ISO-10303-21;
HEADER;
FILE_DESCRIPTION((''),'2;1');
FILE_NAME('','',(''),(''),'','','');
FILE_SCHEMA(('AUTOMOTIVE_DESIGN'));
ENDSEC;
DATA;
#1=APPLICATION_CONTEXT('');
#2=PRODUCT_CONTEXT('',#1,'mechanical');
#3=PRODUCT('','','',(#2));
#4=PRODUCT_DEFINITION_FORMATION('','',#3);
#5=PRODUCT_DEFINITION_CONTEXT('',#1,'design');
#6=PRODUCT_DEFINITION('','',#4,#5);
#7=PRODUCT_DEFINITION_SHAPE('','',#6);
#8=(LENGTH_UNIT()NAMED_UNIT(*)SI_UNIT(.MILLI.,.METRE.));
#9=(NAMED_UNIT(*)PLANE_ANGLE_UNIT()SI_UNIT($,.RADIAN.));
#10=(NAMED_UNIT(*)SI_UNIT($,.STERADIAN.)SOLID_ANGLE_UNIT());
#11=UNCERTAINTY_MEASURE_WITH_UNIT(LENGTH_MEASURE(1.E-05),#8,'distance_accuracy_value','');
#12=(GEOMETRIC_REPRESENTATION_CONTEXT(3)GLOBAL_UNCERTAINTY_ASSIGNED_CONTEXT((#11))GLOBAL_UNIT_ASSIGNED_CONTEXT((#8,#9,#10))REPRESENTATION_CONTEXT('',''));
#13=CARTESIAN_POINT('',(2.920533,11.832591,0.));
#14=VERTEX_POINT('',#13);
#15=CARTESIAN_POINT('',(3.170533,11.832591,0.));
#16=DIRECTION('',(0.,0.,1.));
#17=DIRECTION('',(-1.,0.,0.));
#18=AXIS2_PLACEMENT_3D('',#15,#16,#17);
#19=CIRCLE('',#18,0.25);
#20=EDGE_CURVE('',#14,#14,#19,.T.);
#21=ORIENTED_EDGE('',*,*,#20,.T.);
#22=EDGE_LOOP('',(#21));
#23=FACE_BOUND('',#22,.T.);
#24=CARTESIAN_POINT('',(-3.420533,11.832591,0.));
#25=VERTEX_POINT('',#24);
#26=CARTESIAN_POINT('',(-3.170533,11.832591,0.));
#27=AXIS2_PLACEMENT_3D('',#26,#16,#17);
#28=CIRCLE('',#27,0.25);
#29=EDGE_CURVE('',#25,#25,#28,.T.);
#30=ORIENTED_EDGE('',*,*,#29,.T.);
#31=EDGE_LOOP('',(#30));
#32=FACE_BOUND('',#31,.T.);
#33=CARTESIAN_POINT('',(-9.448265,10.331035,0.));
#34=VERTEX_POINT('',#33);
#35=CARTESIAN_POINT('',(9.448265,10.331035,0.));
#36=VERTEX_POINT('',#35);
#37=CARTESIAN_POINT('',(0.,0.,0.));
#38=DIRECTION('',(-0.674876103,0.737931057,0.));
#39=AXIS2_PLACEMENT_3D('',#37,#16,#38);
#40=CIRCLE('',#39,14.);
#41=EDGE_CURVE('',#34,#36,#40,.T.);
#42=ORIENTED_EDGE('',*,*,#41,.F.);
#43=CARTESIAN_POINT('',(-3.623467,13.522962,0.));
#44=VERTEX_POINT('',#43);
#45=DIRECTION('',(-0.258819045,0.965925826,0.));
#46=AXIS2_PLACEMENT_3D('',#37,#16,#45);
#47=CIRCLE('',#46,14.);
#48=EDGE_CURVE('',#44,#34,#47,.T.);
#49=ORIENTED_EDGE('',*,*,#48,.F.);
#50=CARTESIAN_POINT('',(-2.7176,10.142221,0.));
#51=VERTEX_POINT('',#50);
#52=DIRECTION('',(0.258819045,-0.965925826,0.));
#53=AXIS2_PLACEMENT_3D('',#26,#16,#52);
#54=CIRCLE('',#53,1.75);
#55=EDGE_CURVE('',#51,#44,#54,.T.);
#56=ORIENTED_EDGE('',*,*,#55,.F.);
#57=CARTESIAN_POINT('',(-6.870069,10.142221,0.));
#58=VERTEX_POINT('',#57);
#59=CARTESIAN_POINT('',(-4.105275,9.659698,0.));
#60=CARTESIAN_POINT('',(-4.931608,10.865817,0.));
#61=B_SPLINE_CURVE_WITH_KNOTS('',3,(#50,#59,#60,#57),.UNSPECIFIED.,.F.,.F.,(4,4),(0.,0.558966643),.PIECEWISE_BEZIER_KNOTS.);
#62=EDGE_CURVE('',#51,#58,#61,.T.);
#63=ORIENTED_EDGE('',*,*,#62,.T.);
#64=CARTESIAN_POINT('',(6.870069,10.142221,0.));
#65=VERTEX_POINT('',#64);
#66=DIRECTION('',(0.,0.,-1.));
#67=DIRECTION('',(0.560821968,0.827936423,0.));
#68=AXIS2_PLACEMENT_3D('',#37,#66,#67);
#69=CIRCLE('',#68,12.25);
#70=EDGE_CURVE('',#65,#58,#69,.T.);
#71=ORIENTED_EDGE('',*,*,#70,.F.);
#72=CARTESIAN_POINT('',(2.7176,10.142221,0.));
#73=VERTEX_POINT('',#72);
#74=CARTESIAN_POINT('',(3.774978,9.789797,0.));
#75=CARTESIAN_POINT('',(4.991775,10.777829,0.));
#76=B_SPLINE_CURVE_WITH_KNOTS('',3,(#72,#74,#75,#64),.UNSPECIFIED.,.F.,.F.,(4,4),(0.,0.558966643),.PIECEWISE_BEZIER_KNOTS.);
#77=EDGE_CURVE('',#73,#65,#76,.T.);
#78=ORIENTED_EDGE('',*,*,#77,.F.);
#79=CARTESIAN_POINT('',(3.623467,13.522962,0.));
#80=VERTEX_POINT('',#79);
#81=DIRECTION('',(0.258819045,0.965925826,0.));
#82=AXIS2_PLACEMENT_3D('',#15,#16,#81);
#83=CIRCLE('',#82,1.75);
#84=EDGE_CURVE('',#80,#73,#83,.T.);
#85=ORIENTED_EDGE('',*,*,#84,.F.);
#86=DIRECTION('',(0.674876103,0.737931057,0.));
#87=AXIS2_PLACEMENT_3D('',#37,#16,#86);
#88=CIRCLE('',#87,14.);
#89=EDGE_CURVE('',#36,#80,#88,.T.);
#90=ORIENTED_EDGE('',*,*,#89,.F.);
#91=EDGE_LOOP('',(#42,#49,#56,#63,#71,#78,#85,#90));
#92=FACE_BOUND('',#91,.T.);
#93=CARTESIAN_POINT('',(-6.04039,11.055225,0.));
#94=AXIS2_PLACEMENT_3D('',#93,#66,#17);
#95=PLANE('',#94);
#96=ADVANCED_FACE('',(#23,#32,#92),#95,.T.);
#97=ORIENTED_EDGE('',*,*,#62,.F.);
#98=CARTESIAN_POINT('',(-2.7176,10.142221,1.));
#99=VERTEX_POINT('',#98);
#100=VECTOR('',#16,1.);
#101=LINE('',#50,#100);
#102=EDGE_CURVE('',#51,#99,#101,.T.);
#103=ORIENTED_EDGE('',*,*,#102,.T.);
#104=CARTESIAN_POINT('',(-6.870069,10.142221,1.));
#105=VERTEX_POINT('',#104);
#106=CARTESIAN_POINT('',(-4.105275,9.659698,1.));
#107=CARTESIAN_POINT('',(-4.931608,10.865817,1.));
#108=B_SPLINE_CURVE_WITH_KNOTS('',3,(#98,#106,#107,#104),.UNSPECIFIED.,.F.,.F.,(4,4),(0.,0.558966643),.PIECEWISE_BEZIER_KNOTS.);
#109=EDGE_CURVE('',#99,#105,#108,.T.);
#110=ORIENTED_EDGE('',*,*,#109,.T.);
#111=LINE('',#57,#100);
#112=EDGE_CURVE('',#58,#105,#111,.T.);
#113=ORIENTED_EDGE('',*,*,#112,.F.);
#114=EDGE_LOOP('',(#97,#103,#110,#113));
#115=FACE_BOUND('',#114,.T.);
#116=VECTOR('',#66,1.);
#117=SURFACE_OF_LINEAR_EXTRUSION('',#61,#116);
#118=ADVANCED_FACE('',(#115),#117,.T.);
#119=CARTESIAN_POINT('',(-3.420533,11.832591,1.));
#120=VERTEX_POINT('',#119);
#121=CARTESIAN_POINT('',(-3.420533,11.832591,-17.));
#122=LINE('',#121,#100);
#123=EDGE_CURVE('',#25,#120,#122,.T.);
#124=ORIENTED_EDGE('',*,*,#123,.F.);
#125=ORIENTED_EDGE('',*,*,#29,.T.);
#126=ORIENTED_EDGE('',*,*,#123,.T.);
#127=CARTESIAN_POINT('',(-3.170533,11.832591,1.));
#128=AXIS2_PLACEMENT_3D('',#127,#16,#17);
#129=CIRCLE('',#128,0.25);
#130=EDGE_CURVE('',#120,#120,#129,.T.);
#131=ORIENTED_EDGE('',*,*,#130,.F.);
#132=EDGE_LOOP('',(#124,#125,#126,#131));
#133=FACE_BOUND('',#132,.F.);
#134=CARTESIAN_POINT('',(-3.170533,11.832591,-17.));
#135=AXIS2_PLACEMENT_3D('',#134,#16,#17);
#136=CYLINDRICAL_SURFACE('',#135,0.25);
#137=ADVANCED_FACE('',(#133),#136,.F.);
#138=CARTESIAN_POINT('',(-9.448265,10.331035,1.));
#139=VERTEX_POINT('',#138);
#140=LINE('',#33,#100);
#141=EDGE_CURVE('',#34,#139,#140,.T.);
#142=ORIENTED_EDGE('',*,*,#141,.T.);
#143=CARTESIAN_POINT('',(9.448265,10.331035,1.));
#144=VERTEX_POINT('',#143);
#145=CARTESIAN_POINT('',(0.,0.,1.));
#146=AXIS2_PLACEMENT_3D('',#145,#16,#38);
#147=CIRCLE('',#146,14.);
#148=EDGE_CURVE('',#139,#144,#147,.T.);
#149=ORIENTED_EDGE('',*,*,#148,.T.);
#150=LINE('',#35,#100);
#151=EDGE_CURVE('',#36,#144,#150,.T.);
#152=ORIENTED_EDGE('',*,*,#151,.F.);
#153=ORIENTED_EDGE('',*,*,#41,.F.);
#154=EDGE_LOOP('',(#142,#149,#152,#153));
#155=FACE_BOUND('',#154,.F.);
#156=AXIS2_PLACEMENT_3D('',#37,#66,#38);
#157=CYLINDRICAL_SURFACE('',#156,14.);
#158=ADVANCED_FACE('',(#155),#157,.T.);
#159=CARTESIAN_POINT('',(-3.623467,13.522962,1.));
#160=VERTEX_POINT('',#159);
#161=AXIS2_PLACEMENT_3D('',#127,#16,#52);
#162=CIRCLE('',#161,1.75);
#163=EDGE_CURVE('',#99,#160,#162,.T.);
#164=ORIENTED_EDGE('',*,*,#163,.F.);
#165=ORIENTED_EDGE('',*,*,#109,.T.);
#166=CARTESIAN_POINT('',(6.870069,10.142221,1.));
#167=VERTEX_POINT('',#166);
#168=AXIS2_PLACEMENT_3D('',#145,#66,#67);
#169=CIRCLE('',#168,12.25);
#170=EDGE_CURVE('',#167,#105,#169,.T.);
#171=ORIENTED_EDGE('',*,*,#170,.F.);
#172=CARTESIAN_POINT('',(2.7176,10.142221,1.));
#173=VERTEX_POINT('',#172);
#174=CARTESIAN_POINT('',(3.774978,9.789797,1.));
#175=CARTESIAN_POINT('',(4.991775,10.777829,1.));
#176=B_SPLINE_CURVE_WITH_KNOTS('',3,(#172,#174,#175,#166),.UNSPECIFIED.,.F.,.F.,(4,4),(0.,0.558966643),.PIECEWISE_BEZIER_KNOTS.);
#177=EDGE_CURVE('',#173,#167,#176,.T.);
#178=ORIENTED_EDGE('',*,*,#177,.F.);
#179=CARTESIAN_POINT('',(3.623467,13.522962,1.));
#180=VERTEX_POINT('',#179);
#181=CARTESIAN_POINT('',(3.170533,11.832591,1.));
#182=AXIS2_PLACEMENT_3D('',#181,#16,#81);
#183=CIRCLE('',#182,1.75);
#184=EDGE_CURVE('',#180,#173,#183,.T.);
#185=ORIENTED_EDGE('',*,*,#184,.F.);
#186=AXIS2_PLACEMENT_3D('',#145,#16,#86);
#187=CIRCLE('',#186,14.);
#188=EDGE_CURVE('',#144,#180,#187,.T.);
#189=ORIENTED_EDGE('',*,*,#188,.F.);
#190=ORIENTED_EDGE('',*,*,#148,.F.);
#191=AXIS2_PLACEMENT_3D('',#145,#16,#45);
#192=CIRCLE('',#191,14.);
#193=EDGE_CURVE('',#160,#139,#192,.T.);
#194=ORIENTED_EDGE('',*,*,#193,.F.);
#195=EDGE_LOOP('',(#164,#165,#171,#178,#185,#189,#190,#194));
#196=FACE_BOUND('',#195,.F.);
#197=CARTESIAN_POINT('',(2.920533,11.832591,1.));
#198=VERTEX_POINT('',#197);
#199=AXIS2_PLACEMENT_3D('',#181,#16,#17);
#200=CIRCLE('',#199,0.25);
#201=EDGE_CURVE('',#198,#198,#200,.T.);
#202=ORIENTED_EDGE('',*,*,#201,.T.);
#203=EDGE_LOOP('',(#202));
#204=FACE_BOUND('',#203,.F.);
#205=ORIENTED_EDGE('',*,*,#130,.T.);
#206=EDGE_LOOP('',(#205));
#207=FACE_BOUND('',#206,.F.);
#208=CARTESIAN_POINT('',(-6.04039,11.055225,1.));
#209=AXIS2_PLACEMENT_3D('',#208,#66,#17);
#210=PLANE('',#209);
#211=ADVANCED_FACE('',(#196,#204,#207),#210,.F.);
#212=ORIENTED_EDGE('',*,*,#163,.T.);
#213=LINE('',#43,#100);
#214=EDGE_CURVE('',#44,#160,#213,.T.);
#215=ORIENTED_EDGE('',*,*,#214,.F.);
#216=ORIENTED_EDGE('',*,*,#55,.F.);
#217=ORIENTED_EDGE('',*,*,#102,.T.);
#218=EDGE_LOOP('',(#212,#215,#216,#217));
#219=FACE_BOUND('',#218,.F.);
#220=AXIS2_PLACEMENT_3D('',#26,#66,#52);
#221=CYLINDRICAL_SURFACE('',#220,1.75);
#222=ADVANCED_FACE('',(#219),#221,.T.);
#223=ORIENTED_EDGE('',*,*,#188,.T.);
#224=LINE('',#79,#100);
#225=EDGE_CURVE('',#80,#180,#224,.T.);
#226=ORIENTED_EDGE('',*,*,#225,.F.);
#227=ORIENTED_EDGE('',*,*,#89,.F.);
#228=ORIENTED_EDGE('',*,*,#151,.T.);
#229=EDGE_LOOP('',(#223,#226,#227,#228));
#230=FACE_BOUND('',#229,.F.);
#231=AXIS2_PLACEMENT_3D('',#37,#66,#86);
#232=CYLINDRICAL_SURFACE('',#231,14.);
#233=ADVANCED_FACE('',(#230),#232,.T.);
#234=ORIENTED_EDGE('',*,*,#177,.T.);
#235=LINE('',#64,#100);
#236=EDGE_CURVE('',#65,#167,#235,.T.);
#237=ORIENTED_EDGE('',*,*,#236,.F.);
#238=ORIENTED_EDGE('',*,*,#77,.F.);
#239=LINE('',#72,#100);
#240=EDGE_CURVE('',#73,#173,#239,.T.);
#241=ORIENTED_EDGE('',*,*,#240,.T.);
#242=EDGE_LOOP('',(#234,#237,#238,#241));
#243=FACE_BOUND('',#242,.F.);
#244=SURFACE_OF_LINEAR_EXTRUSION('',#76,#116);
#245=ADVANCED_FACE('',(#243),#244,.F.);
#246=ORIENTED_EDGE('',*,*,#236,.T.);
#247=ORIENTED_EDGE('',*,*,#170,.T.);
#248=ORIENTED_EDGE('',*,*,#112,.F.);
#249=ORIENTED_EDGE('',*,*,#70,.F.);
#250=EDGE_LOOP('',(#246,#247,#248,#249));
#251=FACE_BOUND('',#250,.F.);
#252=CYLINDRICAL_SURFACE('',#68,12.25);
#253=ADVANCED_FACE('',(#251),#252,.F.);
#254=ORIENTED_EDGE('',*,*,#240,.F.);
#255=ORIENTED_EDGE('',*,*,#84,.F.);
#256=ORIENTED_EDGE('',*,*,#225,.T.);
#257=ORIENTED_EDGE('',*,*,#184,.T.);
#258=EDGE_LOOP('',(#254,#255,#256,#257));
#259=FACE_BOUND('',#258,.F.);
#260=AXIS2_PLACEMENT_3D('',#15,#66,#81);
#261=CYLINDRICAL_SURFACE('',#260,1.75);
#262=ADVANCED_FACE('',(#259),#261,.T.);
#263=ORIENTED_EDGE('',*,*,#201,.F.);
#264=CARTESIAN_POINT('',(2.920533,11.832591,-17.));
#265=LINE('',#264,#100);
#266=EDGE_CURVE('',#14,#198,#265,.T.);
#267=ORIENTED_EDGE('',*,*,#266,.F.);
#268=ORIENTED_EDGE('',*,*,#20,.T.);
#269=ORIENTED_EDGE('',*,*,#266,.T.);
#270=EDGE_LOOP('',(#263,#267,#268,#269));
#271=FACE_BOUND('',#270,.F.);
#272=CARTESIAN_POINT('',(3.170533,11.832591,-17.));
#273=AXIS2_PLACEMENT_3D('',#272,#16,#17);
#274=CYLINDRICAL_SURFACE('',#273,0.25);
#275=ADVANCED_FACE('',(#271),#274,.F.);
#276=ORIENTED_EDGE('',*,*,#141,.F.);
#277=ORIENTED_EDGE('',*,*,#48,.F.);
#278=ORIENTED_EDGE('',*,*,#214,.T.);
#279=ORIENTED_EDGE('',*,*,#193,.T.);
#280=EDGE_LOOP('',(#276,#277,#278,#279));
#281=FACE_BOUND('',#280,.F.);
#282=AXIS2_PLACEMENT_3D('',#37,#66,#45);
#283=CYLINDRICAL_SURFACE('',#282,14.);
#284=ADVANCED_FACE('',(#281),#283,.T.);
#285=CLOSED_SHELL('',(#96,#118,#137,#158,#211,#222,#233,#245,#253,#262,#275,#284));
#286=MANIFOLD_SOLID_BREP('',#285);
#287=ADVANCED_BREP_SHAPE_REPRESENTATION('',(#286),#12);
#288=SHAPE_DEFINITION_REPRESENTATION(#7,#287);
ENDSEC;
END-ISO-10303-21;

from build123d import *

# Parameters (mm, degrees)
F1_DEPTH = 1
F2_D     = 0.5
F2_DEPTH = 17
F2_TIP   = 0.1502151548


with BuildPart() as f1:
    # F0 (on Top) → F1 (new body)
    with BuildSketch(Plane.XY):
        with BuildLine():
            add(Edge.make_bspline(
                [(-6.8700691129, 10.142221176), (-8.399545307, 9.5712927005), (-10.6213726103, 7.7990288846), (-9.4482654422, 10.3310348046)],
                knots=[0.5589666429, 0.5589666429, 0.5589666429, 0.5589666429, 1, 1, 1, 1], degree=3))
            add(Edge.make_bspline(
                [(-2.7175999736, 10.142221176), (-4.1052754968, 9.659698233), (-4.9316076337, 10.8658171767), (-6.8700691129, 10.142221176)],
                knots=[0, 0, 0, 0, 0.5589666429, 0.5589666429, 0.5589666429, 0.5589666429], degree=3))
            Line((-2.7175999736, 10.142221176), (-3.6234666314, 13.522961568))
            ThreePointArc((-3.6234666314, 13.522961568), (-6.727900413, 12.2774327949), (-9.4482654422, 10.3310348046))
        make_face()
        with BuildLine():
            ThreePointArc((6.8700691129, 10.142221176), (0, -12.25), (-6.8700691129, 10.142221176))
            add(Edge.make_bspline(
                [(-6.8700691129, 10.142221176), (-8.399545307, 9.5712927005), (-10.6213726103, 7.7990288846), (-9.4482654422, 10.3310348046)],
                knots=[0.5589666429, 0.5589666429, 0.5589666429, 0.5589666429, 1, 1, 1, 1], degree=3))
            ThreePointArc((-9.4482654422, 10.3310348046), (0, -14), (9.4482654422, 10.3310348046))
            add(Edge.make_bspline(
                [(6.8700691129, 10.142221176), (8.3520722793, 9.6407168218), (10.2458875626, 8.1284232438), (9.4482654422, 10.3310348046)],
                knots=[0.5589666429, 0.5589666429, 0.5589666429, 0.5589666429, 1, 1, 1, 1], degree=3))
        make_face()
        with BuildLine():
            add(Edge.make_bspline(
                [(2.7175999736, 10.142221176), (3.7749782205, 9.7897974774), (4.9917750531, 10.7778288933), (6.8700691129, 10.142221176)],
                knots=[0, 0, 0, 0, 0.5589666429, 0.5589666429, 0.5589666429, 0.5589666429], degree=3))
            add(Edge.make_bspline(
                [(6.8700691129, 10.142221176), (8.3520722793, 9.6407168218), (10.2458875626, 8.1284232438), (9.4482654422, 10.3310348046)],
                knots=[0.5589666429, 0.5589666429, 0.5589666429, 0.5589666429, 1, 1, 1, 1], degree=3))
            ThreePointArc((9.4482654422, 10.3310348046), (6.727900413, 12.2774327949), (3.6234666314, 13.522961568))
            Line((3.6234666314, 13.522961568), (2.7175999736, 10.142221176))
        make_face()
        with BuildLine():
            Line((-3.6234666314, 13.522961568), (-2.7175999736, 10.142221176))
            ThreePointArc((-2.7175999736, 10.142221176), (-1.4801631065, 12.285524701), (-3.6234666314, 13.522961568))
        make_face()
        with BuildLine():
            ThreePointArc((3.6234666314, 13.522961568), (1.4801631065, 12.285524701), (2.7175999736, 10.142221176))
            Line((2.7175999736, 10.142221176), (3.6234666314, 13.522961568))
        make_face()
    extrude(amount=F1_DEPTH)

    # F2
    with Locations(Plane(origin=(0, 0, 0), x_dir=(1, 0, 0), z_dir=(0, 0, -1))):
        with Locations((-3.1705333025, -11.832591372), (3.1705333025, -11.832591372)):
            Hole(F2_D / 2, depth=F2_DEPTH)
            with Locations((0, 0, -(F2_DEPTH + F2_TIP / 2))):  # 118° drill point
                Cone(0, F2_D / 2, F2_TIP, mode=Mode.SUBTRACT)


solid = f1.part
